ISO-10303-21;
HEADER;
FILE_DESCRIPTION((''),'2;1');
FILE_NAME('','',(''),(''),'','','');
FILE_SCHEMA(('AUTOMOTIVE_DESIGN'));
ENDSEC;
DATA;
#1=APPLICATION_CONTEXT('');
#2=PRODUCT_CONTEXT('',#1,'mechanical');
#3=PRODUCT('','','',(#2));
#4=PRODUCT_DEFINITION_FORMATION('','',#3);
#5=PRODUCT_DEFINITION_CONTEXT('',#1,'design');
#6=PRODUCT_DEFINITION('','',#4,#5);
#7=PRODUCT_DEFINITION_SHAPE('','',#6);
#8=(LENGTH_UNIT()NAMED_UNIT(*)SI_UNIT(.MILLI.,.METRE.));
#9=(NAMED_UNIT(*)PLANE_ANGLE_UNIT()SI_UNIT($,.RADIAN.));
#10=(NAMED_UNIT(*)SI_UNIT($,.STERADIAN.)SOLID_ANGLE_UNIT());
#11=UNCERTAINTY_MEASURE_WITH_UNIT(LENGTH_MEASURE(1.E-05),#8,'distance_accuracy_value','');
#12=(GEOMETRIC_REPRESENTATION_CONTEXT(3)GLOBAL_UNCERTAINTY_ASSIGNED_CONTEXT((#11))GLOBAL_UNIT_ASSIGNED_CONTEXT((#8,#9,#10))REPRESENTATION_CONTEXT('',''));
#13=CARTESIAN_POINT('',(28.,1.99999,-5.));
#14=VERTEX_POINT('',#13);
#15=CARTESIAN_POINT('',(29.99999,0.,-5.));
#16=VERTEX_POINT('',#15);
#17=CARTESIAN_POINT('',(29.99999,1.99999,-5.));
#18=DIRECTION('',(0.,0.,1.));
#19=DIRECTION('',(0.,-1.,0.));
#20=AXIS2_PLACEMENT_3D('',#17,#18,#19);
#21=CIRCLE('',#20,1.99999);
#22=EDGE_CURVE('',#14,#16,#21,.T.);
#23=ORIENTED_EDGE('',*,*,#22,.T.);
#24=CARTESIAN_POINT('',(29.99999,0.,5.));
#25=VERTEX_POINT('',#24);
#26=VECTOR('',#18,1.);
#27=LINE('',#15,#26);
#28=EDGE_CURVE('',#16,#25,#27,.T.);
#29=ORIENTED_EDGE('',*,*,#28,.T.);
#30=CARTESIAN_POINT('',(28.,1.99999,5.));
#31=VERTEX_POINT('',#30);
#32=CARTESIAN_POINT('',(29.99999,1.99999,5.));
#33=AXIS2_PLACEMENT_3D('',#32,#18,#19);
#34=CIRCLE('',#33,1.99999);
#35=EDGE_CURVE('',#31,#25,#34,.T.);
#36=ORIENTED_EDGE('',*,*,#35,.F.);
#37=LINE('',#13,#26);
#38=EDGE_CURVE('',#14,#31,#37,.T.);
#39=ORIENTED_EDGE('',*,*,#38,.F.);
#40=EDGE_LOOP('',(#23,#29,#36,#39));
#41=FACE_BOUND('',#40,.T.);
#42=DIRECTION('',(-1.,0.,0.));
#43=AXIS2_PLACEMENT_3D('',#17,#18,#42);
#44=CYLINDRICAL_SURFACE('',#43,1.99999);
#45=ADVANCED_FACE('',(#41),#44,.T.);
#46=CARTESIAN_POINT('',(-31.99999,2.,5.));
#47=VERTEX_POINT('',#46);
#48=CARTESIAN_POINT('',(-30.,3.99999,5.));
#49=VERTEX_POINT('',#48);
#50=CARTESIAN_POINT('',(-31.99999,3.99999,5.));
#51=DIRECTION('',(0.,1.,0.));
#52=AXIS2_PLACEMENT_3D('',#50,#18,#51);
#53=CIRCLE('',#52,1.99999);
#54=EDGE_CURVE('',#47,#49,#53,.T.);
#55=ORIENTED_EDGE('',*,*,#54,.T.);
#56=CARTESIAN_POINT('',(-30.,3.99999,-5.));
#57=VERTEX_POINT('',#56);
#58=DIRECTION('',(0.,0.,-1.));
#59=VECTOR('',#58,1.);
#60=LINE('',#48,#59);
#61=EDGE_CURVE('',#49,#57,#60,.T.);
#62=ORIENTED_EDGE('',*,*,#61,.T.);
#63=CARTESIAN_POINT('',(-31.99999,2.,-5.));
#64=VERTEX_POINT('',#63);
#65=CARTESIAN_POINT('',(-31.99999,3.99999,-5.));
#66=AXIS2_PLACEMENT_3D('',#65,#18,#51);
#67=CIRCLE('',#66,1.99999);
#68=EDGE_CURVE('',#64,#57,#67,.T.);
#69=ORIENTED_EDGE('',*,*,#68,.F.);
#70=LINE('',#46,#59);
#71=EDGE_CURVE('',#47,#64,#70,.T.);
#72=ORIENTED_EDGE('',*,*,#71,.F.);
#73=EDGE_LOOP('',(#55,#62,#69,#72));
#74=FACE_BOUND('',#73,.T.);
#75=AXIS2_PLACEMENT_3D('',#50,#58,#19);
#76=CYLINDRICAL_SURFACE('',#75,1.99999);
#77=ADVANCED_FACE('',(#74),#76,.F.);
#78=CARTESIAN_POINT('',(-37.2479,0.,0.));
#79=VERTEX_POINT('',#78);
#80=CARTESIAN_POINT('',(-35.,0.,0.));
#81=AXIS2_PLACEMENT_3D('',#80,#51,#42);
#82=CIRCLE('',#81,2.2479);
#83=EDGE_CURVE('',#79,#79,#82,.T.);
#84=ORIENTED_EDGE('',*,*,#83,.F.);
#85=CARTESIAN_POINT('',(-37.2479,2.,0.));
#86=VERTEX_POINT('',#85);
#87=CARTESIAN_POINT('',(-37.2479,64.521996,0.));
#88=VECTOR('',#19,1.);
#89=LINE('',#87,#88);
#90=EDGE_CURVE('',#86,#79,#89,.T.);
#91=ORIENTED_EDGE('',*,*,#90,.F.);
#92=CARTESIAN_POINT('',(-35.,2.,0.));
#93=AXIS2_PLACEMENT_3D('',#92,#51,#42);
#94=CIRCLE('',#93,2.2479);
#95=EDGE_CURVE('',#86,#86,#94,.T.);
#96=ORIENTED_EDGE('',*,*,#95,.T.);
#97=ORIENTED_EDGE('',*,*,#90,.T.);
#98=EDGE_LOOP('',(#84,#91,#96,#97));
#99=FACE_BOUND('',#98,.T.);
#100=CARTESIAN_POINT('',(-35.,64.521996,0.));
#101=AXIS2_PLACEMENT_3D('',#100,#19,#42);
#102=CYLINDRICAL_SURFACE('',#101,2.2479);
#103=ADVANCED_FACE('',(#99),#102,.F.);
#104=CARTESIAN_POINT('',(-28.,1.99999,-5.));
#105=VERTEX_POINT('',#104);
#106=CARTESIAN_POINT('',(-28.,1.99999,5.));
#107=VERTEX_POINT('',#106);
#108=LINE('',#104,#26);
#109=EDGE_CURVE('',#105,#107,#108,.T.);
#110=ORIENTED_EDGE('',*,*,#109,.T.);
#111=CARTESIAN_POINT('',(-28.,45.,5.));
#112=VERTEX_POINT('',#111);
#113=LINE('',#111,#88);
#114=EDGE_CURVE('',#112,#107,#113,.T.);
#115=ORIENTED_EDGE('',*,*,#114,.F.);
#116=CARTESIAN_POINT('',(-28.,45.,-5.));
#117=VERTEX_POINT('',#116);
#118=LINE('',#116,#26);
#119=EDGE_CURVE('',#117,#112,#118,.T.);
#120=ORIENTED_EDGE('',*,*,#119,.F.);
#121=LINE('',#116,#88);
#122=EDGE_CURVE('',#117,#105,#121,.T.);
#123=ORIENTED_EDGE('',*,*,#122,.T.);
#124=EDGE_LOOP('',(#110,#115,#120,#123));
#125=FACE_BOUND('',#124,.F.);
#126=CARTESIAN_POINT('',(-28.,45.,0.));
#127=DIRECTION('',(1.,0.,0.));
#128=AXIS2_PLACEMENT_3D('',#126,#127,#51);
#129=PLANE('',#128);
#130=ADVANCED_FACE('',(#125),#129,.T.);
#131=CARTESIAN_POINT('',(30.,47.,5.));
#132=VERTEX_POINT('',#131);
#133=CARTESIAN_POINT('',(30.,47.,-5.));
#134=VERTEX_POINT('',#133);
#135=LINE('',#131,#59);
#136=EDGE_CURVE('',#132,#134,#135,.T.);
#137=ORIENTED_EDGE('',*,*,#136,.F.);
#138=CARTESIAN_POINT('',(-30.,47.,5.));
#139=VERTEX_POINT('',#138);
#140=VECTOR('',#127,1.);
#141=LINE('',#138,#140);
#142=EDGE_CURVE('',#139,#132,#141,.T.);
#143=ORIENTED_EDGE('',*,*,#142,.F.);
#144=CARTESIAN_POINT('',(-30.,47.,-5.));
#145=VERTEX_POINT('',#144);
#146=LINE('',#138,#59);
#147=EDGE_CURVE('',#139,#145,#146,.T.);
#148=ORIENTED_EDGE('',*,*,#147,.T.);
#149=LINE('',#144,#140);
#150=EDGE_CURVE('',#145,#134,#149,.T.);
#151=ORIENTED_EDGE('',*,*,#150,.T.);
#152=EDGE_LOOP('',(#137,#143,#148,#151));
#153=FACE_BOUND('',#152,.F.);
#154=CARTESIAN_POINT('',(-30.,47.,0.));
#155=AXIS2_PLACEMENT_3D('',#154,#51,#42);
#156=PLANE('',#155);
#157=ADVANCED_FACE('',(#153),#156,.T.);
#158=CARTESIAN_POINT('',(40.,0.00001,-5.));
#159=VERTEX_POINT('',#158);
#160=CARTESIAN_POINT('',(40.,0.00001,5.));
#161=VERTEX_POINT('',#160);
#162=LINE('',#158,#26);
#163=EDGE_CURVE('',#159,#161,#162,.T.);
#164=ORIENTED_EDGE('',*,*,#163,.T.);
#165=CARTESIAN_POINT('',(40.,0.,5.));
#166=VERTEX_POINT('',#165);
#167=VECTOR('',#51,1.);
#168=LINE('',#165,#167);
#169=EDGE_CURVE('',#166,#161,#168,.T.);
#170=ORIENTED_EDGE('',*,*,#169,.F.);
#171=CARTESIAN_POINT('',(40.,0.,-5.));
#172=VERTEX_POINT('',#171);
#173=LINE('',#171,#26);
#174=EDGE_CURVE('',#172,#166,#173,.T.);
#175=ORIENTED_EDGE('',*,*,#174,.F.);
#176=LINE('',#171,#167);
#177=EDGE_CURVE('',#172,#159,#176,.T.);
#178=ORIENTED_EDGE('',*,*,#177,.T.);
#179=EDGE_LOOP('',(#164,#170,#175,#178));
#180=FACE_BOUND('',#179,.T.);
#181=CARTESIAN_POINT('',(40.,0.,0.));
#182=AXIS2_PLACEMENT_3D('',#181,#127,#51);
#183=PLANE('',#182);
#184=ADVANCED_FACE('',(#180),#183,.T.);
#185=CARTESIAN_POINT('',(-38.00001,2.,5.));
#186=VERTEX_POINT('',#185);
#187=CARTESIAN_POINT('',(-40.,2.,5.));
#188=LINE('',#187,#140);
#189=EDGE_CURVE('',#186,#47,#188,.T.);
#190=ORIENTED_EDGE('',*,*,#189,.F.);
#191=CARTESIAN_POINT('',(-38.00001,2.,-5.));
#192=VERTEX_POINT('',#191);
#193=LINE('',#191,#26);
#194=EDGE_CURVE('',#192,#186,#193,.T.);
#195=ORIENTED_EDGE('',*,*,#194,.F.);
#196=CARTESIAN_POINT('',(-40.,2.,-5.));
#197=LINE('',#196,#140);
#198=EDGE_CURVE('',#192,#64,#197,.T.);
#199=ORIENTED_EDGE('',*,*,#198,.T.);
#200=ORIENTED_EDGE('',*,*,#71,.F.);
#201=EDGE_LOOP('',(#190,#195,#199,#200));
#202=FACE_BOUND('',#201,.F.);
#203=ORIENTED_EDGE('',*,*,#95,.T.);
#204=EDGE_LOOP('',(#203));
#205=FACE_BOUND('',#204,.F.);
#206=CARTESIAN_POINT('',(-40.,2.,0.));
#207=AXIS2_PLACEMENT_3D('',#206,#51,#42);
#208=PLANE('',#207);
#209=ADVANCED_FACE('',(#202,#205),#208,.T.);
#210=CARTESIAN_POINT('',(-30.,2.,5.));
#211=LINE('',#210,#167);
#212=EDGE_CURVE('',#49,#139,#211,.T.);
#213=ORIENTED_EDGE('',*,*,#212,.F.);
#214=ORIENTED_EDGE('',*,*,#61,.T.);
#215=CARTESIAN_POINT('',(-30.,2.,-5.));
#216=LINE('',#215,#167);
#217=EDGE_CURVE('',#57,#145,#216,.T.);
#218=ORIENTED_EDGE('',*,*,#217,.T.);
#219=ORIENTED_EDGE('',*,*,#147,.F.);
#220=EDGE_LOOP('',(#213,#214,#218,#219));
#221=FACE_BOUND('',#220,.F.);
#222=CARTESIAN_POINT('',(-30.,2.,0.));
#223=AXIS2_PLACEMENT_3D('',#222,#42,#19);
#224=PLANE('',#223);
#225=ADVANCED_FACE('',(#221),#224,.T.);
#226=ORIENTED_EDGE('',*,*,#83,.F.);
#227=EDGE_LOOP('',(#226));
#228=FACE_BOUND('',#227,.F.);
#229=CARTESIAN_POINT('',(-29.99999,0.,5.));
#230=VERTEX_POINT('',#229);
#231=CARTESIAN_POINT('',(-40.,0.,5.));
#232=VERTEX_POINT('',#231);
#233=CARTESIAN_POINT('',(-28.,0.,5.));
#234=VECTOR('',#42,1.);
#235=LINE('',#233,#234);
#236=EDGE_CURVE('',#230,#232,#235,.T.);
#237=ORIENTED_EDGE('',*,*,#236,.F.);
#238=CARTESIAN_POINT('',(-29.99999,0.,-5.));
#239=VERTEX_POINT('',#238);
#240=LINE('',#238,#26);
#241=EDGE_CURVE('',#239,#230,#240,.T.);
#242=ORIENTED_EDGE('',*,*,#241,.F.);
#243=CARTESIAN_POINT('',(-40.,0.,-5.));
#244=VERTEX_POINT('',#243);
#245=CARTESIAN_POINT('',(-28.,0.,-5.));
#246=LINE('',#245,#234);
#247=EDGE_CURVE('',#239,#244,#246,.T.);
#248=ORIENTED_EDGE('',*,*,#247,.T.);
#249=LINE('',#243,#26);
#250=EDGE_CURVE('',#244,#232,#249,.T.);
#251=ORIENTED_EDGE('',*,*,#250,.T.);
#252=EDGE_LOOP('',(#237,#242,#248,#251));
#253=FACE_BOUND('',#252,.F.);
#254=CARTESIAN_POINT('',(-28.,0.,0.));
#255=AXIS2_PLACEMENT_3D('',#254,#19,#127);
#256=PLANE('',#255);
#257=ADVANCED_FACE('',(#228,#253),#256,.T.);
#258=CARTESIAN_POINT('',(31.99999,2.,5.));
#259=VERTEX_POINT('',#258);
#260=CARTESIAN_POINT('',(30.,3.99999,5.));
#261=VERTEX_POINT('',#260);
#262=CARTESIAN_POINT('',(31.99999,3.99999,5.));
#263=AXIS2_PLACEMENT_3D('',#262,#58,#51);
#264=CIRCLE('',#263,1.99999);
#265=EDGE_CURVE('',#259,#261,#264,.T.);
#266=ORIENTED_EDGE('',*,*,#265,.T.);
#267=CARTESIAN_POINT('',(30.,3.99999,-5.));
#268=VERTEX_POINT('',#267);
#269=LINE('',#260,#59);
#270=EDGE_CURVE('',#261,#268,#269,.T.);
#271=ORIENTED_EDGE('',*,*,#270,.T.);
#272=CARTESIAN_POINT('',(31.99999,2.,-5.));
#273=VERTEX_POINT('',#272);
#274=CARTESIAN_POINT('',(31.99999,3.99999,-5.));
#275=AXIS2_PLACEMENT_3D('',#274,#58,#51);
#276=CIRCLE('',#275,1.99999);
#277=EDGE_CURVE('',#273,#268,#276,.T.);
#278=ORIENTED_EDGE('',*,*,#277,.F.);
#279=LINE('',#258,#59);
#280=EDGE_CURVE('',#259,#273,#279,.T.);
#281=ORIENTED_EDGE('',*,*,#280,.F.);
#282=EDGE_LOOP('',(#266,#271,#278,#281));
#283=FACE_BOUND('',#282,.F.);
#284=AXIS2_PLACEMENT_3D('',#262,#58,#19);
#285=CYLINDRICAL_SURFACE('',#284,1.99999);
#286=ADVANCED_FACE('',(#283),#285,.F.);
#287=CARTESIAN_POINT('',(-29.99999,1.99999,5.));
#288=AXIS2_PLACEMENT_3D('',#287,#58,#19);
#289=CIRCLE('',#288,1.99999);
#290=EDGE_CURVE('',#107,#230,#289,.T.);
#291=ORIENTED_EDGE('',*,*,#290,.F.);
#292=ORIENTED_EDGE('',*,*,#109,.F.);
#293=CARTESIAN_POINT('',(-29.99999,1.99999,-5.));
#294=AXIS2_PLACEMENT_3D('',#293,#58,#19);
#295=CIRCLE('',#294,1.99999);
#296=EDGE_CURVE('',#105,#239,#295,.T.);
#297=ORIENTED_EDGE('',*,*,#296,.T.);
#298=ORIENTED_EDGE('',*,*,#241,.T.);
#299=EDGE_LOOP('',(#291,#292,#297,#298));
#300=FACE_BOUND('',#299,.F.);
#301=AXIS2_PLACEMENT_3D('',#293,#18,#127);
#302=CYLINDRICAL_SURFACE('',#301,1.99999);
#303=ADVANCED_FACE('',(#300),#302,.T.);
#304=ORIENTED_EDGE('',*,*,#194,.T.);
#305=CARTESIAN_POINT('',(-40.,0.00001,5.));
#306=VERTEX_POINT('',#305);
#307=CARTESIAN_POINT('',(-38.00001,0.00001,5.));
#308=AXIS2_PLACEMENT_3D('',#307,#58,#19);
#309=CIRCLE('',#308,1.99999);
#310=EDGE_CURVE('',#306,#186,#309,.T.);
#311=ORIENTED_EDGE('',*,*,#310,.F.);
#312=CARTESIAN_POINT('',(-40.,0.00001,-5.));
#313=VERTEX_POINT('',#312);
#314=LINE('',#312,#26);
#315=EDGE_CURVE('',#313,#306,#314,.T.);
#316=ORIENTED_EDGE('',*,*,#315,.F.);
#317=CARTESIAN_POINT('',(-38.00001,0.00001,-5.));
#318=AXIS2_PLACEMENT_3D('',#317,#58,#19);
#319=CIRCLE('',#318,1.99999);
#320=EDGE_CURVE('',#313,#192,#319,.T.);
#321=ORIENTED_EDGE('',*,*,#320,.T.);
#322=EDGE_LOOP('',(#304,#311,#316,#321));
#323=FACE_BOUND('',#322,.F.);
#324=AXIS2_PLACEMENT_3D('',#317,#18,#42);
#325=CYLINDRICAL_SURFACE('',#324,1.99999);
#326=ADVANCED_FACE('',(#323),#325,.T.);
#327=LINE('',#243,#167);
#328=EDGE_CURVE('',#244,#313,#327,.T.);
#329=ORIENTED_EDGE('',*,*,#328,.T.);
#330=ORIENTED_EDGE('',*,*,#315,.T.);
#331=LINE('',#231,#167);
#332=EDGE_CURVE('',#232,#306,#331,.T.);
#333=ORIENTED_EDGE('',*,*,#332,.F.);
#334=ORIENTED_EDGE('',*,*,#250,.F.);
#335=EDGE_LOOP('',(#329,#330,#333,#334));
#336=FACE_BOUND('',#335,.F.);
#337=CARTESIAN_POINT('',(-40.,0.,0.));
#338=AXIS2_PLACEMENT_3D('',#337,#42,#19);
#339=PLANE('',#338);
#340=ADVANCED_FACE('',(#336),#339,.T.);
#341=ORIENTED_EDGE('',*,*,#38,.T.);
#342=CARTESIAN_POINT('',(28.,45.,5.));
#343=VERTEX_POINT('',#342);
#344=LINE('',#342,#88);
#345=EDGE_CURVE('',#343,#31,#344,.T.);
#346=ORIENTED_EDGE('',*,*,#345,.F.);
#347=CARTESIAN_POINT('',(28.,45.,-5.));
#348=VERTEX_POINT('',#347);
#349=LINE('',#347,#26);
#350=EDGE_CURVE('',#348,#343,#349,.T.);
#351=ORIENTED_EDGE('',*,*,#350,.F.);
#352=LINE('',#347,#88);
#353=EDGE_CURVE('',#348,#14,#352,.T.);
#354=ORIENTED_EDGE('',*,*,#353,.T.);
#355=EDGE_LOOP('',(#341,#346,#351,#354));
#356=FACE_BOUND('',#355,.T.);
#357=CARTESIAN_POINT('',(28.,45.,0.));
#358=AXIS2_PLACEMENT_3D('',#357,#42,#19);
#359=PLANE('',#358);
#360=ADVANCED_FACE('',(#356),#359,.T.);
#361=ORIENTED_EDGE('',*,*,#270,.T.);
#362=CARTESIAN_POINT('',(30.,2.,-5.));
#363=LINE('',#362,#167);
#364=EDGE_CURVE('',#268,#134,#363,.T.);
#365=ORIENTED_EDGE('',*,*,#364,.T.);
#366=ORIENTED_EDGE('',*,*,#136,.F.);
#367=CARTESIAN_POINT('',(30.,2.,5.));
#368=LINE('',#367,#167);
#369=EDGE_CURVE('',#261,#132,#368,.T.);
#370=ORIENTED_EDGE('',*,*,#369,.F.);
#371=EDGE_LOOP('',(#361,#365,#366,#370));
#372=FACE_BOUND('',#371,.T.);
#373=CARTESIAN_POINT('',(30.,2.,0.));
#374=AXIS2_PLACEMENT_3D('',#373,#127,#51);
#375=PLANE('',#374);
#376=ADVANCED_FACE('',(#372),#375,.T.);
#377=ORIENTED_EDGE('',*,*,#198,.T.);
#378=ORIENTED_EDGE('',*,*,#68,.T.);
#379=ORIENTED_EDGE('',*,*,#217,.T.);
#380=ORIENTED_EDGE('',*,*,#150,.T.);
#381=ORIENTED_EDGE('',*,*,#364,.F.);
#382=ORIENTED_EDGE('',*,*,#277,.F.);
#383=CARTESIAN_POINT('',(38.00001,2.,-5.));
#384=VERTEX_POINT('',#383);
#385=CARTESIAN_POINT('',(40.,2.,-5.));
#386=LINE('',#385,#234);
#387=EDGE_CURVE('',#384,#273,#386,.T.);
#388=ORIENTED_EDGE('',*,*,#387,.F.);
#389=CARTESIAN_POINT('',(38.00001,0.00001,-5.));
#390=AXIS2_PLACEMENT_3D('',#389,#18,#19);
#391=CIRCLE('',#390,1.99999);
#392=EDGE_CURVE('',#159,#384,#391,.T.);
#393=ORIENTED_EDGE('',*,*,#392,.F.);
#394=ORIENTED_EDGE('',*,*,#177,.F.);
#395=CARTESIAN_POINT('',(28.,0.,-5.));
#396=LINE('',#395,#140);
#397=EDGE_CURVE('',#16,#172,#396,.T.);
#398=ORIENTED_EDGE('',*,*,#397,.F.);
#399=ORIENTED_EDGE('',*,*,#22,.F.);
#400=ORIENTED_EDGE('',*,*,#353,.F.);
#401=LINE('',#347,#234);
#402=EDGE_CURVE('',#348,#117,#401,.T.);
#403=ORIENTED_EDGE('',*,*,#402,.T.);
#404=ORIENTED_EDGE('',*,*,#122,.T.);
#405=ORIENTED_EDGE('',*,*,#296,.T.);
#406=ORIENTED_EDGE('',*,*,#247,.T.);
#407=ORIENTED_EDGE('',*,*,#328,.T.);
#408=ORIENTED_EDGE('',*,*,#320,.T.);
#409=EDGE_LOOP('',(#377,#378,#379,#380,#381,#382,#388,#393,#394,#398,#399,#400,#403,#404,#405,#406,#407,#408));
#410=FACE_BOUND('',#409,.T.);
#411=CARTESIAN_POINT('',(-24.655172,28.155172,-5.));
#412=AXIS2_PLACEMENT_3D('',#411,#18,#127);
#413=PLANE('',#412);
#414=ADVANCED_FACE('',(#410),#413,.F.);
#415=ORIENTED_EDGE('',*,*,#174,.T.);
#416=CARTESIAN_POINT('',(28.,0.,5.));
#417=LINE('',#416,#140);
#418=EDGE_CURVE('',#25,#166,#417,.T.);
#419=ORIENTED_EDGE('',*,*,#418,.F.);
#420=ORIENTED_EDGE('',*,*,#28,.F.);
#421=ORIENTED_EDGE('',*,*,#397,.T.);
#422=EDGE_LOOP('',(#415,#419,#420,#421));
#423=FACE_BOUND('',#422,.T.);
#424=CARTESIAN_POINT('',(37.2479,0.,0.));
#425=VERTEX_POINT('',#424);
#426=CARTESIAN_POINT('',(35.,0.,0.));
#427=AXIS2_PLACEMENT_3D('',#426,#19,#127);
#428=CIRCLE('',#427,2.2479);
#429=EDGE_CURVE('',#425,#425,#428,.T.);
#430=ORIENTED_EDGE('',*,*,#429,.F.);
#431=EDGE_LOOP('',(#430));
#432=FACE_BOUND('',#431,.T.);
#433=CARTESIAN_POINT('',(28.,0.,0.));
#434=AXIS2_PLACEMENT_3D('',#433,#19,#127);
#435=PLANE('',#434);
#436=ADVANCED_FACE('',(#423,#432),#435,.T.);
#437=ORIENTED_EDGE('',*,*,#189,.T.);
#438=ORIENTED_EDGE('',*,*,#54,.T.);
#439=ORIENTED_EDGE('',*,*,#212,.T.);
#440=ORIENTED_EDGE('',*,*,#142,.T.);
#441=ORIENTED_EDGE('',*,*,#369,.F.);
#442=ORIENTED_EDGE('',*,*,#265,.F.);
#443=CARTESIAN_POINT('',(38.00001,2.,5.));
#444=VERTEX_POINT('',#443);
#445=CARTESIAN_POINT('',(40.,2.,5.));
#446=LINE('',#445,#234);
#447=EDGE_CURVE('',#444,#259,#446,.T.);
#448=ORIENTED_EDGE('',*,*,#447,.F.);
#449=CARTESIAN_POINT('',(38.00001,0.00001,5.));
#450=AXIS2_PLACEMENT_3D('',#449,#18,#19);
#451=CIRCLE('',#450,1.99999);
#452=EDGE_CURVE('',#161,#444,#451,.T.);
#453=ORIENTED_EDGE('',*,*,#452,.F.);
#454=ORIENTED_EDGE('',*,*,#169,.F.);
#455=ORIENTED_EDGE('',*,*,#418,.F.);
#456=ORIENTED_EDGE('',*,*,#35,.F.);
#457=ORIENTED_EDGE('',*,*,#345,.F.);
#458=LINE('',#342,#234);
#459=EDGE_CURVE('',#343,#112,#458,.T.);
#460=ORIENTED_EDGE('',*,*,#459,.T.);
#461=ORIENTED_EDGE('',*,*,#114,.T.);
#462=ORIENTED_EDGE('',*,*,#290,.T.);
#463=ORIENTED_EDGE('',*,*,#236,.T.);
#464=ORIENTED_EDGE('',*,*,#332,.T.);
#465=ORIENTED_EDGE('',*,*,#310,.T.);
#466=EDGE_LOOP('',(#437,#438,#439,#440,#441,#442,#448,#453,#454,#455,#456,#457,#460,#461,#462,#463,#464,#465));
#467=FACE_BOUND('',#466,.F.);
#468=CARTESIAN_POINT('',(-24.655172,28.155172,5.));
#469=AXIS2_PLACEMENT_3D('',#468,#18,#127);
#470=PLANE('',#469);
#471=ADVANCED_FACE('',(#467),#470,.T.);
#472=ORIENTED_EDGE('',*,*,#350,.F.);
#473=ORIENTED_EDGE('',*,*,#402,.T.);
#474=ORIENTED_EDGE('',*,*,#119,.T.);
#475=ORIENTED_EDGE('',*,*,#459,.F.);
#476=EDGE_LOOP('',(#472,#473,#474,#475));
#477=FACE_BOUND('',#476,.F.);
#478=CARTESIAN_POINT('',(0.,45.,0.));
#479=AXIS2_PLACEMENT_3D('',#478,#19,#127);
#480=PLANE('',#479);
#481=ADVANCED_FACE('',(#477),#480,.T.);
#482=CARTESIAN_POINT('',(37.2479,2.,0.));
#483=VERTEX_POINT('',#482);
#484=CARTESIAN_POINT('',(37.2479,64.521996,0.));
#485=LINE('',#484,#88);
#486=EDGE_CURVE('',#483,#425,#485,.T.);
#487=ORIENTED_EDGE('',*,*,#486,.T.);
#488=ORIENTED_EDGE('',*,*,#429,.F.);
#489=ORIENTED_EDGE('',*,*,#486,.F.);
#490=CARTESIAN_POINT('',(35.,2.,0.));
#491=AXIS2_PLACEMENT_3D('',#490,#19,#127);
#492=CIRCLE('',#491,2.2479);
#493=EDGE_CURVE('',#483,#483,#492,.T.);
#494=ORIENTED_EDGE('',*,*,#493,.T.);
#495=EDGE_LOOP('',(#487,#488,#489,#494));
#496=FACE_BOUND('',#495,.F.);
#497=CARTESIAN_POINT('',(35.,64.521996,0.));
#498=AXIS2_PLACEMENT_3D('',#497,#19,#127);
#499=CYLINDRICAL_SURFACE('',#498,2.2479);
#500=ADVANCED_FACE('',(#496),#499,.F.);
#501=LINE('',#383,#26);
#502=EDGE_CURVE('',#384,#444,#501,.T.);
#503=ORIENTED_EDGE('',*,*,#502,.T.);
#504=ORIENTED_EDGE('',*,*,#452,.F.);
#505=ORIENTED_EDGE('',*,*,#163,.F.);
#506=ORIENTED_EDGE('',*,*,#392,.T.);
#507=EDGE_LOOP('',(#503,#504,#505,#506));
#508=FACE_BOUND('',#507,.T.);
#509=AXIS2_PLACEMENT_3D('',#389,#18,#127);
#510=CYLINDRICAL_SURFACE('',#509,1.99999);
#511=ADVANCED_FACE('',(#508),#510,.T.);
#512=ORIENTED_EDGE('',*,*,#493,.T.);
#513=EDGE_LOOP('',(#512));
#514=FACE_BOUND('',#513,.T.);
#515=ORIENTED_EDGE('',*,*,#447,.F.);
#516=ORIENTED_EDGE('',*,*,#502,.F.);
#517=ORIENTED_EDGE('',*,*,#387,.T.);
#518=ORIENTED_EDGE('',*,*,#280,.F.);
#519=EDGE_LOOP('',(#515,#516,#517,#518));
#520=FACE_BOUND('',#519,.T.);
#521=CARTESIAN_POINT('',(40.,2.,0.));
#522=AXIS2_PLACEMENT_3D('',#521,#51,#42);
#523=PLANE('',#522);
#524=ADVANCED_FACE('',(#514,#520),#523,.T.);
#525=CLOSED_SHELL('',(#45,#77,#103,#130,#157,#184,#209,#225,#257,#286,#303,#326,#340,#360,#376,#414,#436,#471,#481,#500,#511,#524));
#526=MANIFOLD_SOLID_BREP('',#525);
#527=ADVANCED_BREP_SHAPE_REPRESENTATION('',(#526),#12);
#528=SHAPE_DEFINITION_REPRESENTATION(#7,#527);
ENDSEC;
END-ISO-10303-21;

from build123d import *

# Parameters (mm, degrees)
F1_DEPTH = 5
F3_D     = 4.4958
F4_R     = 1.99999


# Not quite as in the source:
# - a fillet or chamfer is up to 0.001 mm smaller than in the source, because OpenCascade refuses the exact size


with BuildPart() as f1:
    # F0 (on Top) → F1 (new body, symmetric)
    with BuildSketch(Plane.XY):
        Polygon((0, 47), (0, 45), (28, 45), (28, 0), (40, 0), (40, 2), (30, 2), (30, 47), align=None)
    extrude(amount=F1_DEPTH, both=True)

    # F3 (through all)
    with Locations(Plane(origin=(0, 2, 0), x_dir=(-1, 0, 0), z_dir=(0, 1, 0))):
        with Locations((-35, 0)):
            Hole(F3_D / 2)

    # F4 (radius 2 in the source; OpenCascade refuses exactly that, so slightly less here)
    f4_edges = [f1.edges().sort_by_distance(p)[0] for p in [
        (30, 2, 0),
        (28, 0, 0),
        (40, 2, 0),
    ]]
    fillet(f4_edges, radius=F4_R)

    # F5: F1 across plane


with BuildPart() as f1_1:
    add(f1.part)
    add(f1.part.mirror(Plane.YZ))


solid = f1_1.part
